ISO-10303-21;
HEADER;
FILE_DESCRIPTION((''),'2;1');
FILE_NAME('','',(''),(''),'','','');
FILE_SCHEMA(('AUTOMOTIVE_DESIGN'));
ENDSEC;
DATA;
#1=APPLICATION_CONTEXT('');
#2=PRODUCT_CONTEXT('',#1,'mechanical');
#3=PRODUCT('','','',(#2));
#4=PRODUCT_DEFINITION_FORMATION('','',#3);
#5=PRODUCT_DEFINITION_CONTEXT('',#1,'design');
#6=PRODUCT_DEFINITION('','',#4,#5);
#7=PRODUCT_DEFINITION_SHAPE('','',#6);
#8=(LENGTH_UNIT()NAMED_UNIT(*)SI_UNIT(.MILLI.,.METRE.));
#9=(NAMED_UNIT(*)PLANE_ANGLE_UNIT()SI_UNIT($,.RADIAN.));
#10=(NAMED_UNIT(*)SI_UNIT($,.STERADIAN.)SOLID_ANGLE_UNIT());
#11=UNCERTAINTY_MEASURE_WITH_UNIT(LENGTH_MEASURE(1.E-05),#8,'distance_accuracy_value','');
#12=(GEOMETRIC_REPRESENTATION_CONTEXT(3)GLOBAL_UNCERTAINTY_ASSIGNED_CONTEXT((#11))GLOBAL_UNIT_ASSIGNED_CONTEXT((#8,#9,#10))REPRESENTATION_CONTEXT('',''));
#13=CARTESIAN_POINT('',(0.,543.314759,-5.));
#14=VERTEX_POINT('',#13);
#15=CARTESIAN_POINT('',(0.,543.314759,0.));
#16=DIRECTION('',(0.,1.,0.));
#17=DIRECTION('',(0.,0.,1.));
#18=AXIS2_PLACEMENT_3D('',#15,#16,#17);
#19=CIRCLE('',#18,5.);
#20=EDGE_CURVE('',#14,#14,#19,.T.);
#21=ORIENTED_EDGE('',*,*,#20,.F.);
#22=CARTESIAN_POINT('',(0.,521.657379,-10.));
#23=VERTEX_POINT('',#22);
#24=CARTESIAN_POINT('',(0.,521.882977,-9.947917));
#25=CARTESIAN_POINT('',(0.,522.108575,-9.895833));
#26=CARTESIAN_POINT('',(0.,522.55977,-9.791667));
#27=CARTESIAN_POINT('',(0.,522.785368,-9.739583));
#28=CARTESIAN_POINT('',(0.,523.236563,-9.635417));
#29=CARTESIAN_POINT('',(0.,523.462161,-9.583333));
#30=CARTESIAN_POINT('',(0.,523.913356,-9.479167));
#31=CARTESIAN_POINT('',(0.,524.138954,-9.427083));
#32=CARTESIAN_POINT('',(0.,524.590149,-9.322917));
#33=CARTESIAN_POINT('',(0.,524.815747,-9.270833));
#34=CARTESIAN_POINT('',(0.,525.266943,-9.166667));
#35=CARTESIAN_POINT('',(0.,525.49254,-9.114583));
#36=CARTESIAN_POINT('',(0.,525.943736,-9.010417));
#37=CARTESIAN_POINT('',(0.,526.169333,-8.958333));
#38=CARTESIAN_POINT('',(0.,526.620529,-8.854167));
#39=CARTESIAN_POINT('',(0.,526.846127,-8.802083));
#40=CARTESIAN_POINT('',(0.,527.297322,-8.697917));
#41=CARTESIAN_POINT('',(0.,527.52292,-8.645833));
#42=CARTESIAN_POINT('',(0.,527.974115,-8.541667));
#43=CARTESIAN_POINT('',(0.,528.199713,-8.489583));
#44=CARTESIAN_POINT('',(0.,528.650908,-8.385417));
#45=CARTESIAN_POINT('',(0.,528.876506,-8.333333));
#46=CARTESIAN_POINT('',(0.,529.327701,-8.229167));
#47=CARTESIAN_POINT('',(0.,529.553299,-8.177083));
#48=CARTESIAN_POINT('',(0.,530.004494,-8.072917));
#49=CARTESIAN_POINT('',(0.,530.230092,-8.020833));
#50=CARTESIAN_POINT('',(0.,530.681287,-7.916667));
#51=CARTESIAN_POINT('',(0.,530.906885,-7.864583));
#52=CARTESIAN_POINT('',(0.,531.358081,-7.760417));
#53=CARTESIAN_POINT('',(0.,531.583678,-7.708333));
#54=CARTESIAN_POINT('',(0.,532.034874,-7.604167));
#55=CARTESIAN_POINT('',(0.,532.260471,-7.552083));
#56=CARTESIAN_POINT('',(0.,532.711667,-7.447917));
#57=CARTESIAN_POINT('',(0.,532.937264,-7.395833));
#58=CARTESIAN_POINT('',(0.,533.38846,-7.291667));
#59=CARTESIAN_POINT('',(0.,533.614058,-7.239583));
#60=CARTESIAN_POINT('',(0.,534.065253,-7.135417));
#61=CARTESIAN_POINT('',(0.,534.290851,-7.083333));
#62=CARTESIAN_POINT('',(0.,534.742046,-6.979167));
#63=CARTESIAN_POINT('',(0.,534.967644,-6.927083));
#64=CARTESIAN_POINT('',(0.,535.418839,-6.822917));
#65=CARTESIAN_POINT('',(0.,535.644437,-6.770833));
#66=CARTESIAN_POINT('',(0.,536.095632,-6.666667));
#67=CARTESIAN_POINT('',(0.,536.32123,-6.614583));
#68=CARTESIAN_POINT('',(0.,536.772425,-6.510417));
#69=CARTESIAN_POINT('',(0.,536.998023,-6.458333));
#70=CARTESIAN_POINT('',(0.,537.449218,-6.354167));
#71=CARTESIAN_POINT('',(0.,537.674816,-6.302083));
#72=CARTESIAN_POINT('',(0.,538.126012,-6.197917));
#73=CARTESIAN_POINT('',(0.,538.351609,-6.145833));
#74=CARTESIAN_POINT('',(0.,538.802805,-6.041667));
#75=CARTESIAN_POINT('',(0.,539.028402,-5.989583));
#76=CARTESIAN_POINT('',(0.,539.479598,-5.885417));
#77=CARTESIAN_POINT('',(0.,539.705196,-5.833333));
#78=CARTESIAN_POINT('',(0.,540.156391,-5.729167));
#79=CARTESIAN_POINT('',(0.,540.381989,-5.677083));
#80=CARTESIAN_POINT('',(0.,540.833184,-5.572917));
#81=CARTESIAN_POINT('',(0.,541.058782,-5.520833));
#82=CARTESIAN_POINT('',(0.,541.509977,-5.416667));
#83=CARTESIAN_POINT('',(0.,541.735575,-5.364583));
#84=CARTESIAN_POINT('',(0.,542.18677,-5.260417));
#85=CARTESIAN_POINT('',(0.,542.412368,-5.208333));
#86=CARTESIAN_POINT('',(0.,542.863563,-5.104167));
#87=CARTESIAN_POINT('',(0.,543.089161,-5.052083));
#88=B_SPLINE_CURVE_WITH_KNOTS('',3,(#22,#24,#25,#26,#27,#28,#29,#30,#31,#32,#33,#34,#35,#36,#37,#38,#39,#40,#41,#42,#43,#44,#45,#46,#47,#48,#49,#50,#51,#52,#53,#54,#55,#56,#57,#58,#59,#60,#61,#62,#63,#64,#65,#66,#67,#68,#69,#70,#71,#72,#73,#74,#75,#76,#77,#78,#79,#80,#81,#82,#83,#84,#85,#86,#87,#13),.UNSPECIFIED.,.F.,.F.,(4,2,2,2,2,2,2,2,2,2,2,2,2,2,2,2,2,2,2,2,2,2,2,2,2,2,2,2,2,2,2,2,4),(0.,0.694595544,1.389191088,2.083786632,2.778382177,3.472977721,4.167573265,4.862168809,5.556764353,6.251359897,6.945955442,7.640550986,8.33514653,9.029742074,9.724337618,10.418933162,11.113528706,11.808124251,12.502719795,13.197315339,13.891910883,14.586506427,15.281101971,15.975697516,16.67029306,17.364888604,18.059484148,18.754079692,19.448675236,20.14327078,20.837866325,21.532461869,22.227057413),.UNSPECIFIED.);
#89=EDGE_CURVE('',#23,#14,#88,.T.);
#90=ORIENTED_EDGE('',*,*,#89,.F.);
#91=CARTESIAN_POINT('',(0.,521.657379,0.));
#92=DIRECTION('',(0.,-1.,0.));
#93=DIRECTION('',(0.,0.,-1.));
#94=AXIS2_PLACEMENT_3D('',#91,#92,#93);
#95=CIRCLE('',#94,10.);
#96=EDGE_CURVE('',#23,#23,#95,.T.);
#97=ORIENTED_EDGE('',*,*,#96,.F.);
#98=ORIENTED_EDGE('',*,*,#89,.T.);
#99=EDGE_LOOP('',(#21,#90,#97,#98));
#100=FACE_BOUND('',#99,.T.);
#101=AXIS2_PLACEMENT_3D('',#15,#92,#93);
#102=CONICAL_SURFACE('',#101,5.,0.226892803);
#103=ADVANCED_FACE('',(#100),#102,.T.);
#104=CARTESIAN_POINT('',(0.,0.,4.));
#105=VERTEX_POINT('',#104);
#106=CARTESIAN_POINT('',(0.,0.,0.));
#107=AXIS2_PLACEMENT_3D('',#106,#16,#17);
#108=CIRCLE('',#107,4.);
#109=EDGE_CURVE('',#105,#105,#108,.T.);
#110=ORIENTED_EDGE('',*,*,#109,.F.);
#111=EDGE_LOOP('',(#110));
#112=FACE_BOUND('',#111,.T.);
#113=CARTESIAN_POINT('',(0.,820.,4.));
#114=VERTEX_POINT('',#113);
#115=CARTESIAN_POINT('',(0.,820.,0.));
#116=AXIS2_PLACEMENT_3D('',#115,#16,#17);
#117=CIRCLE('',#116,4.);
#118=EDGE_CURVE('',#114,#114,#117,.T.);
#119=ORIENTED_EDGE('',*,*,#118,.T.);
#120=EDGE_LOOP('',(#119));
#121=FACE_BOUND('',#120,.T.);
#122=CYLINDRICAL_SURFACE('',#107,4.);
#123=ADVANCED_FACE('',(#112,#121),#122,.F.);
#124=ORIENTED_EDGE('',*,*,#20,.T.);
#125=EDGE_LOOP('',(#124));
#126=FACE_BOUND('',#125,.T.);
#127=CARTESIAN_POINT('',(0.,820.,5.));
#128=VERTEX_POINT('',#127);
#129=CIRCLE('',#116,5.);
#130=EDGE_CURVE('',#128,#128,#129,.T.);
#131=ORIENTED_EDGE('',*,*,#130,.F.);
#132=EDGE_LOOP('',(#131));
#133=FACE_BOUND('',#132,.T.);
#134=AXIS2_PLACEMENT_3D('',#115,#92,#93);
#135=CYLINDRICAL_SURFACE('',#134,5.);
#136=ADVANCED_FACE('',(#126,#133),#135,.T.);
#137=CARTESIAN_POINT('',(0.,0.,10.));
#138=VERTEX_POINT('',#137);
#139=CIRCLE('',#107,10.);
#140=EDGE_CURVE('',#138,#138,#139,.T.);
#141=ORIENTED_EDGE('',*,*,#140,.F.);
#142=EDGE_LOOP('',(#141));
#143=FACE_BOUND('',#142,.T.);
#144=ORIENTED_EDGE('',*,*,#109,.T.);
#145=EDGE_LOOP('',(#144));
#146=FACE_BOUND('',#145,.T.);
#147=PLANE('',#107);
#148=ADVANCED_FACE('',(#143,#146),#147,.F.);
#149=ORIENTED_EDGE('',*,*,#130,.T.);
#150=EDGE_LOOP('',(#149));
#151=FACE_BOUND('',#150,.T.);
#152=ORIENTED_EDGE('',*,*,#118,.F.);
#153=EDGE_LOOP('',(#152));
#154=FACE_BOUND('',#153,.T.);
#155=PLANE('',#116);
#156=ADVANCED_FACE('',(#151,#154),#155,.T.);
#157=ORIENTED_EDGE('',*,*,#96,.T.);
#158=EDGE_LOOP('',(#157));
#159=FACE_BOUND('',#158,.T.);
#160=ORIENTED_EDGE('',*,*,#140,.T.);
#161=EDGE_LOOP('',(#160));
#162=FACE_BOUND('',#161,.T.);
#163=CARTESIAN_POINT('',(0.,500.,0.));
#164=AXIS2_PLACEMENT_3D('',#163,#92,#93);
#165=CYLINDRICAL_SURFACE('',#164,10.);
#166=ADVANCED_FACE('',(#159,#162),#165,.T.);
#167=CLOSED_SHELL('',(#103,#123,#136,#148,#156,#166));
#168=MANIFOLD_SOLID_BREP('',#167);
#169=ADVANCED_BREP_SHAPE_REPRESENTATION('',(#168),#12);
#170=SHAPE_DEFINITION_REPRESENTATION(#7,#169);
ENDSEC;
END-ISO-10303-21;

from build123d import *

# Parameters (mm, degrees)
ESQUISSE1_R             = 5
BOSS_EXTRU_1_DEPTH      = 820
ESQUISSE2_R             = 10
BOSS_EXTRU_2_DEPTH      = 500
CHANFREIN1_SIZE         = 10
CHANFREIN1_SIZE_2       = 43.314758743
ESQUISSE3_R             = 4
ENL_V_MAT_EXTRU_1_DEPTH = 821.121942153


with BuildPart() as part:
    # Esquisse1 → Boss.-Extru.1 (new body)
    with BuildSketch(Plane(origin=(0, 0, 0), x_dir=(1, 0, 0), z_dir=(0, 1, 0))):
        with Locations(Location((0, 0, 0), (0, 0, 270))):
            Circle(ESQUISSE1_R)
    extrude(amount=BOSS_EXTRU_1_DEPTH)

    # Esquisse2 → Boss.-Extru.2 (add)
    with BuildSketch(Plane(origin=(0, 0, 0), x_dir=(1, 0, 0), z_dir=(0, 1, 0))):
        with Locations(Location((0, 0, 0), (0, 0, 270))):
            Circle(ESQUISSE2_R)
    extrude(amount=BOSS_EXTRU_2_DEPTH)

    # Chanfrein1
    # the kernel refuses this chamfer: 43.314758743, 10 mm, written as the material it adds along each edge
    with BuildSketch(Plane(origin=(0, 500, 0), x_dir=(0, 0, 1), z_dir=(1, 0, 0))) as chanfrein1_piece_1_section:
        Polygon((5 + CHANFREIN1_SIZE, 0), (5, -CHANFREIN1_SIZE_2), (5, 0), align=None)
    chanfrein1_piece_1 = revolve(axis=Axis((0, 500, 0), (0, -1, 0)), mode=Mode.PRIVATE)
    chanfrein1_piece_1 = chanfrein1_piece_1 & Plane(origin=(0, 533.283833366, 0), x_dir=(0, 0, 1), z_dir=(0, -1, 0)) * Cylinder(10, 174, mode=Mode.PRIVATE)
    add(chanfrein1_piece_1)

    # Esquisse3 → Enlèv. mat.-Extru.1 (cut, through all)
    with BuildSketch(Plane(origin=(0, 820, 0), x_dir=(1, 0, 0), z_dir=(0, 1, 0))):
        with Locations(Location((0, 0, 0), (0, 0, 270))):
            Circle(ESQUISSE3_R)
    extrude(amount=-ENL_V_MAT_EXTRU_1_DEPTH, mode=Mode.SUBTRACT)


solid = part.part
